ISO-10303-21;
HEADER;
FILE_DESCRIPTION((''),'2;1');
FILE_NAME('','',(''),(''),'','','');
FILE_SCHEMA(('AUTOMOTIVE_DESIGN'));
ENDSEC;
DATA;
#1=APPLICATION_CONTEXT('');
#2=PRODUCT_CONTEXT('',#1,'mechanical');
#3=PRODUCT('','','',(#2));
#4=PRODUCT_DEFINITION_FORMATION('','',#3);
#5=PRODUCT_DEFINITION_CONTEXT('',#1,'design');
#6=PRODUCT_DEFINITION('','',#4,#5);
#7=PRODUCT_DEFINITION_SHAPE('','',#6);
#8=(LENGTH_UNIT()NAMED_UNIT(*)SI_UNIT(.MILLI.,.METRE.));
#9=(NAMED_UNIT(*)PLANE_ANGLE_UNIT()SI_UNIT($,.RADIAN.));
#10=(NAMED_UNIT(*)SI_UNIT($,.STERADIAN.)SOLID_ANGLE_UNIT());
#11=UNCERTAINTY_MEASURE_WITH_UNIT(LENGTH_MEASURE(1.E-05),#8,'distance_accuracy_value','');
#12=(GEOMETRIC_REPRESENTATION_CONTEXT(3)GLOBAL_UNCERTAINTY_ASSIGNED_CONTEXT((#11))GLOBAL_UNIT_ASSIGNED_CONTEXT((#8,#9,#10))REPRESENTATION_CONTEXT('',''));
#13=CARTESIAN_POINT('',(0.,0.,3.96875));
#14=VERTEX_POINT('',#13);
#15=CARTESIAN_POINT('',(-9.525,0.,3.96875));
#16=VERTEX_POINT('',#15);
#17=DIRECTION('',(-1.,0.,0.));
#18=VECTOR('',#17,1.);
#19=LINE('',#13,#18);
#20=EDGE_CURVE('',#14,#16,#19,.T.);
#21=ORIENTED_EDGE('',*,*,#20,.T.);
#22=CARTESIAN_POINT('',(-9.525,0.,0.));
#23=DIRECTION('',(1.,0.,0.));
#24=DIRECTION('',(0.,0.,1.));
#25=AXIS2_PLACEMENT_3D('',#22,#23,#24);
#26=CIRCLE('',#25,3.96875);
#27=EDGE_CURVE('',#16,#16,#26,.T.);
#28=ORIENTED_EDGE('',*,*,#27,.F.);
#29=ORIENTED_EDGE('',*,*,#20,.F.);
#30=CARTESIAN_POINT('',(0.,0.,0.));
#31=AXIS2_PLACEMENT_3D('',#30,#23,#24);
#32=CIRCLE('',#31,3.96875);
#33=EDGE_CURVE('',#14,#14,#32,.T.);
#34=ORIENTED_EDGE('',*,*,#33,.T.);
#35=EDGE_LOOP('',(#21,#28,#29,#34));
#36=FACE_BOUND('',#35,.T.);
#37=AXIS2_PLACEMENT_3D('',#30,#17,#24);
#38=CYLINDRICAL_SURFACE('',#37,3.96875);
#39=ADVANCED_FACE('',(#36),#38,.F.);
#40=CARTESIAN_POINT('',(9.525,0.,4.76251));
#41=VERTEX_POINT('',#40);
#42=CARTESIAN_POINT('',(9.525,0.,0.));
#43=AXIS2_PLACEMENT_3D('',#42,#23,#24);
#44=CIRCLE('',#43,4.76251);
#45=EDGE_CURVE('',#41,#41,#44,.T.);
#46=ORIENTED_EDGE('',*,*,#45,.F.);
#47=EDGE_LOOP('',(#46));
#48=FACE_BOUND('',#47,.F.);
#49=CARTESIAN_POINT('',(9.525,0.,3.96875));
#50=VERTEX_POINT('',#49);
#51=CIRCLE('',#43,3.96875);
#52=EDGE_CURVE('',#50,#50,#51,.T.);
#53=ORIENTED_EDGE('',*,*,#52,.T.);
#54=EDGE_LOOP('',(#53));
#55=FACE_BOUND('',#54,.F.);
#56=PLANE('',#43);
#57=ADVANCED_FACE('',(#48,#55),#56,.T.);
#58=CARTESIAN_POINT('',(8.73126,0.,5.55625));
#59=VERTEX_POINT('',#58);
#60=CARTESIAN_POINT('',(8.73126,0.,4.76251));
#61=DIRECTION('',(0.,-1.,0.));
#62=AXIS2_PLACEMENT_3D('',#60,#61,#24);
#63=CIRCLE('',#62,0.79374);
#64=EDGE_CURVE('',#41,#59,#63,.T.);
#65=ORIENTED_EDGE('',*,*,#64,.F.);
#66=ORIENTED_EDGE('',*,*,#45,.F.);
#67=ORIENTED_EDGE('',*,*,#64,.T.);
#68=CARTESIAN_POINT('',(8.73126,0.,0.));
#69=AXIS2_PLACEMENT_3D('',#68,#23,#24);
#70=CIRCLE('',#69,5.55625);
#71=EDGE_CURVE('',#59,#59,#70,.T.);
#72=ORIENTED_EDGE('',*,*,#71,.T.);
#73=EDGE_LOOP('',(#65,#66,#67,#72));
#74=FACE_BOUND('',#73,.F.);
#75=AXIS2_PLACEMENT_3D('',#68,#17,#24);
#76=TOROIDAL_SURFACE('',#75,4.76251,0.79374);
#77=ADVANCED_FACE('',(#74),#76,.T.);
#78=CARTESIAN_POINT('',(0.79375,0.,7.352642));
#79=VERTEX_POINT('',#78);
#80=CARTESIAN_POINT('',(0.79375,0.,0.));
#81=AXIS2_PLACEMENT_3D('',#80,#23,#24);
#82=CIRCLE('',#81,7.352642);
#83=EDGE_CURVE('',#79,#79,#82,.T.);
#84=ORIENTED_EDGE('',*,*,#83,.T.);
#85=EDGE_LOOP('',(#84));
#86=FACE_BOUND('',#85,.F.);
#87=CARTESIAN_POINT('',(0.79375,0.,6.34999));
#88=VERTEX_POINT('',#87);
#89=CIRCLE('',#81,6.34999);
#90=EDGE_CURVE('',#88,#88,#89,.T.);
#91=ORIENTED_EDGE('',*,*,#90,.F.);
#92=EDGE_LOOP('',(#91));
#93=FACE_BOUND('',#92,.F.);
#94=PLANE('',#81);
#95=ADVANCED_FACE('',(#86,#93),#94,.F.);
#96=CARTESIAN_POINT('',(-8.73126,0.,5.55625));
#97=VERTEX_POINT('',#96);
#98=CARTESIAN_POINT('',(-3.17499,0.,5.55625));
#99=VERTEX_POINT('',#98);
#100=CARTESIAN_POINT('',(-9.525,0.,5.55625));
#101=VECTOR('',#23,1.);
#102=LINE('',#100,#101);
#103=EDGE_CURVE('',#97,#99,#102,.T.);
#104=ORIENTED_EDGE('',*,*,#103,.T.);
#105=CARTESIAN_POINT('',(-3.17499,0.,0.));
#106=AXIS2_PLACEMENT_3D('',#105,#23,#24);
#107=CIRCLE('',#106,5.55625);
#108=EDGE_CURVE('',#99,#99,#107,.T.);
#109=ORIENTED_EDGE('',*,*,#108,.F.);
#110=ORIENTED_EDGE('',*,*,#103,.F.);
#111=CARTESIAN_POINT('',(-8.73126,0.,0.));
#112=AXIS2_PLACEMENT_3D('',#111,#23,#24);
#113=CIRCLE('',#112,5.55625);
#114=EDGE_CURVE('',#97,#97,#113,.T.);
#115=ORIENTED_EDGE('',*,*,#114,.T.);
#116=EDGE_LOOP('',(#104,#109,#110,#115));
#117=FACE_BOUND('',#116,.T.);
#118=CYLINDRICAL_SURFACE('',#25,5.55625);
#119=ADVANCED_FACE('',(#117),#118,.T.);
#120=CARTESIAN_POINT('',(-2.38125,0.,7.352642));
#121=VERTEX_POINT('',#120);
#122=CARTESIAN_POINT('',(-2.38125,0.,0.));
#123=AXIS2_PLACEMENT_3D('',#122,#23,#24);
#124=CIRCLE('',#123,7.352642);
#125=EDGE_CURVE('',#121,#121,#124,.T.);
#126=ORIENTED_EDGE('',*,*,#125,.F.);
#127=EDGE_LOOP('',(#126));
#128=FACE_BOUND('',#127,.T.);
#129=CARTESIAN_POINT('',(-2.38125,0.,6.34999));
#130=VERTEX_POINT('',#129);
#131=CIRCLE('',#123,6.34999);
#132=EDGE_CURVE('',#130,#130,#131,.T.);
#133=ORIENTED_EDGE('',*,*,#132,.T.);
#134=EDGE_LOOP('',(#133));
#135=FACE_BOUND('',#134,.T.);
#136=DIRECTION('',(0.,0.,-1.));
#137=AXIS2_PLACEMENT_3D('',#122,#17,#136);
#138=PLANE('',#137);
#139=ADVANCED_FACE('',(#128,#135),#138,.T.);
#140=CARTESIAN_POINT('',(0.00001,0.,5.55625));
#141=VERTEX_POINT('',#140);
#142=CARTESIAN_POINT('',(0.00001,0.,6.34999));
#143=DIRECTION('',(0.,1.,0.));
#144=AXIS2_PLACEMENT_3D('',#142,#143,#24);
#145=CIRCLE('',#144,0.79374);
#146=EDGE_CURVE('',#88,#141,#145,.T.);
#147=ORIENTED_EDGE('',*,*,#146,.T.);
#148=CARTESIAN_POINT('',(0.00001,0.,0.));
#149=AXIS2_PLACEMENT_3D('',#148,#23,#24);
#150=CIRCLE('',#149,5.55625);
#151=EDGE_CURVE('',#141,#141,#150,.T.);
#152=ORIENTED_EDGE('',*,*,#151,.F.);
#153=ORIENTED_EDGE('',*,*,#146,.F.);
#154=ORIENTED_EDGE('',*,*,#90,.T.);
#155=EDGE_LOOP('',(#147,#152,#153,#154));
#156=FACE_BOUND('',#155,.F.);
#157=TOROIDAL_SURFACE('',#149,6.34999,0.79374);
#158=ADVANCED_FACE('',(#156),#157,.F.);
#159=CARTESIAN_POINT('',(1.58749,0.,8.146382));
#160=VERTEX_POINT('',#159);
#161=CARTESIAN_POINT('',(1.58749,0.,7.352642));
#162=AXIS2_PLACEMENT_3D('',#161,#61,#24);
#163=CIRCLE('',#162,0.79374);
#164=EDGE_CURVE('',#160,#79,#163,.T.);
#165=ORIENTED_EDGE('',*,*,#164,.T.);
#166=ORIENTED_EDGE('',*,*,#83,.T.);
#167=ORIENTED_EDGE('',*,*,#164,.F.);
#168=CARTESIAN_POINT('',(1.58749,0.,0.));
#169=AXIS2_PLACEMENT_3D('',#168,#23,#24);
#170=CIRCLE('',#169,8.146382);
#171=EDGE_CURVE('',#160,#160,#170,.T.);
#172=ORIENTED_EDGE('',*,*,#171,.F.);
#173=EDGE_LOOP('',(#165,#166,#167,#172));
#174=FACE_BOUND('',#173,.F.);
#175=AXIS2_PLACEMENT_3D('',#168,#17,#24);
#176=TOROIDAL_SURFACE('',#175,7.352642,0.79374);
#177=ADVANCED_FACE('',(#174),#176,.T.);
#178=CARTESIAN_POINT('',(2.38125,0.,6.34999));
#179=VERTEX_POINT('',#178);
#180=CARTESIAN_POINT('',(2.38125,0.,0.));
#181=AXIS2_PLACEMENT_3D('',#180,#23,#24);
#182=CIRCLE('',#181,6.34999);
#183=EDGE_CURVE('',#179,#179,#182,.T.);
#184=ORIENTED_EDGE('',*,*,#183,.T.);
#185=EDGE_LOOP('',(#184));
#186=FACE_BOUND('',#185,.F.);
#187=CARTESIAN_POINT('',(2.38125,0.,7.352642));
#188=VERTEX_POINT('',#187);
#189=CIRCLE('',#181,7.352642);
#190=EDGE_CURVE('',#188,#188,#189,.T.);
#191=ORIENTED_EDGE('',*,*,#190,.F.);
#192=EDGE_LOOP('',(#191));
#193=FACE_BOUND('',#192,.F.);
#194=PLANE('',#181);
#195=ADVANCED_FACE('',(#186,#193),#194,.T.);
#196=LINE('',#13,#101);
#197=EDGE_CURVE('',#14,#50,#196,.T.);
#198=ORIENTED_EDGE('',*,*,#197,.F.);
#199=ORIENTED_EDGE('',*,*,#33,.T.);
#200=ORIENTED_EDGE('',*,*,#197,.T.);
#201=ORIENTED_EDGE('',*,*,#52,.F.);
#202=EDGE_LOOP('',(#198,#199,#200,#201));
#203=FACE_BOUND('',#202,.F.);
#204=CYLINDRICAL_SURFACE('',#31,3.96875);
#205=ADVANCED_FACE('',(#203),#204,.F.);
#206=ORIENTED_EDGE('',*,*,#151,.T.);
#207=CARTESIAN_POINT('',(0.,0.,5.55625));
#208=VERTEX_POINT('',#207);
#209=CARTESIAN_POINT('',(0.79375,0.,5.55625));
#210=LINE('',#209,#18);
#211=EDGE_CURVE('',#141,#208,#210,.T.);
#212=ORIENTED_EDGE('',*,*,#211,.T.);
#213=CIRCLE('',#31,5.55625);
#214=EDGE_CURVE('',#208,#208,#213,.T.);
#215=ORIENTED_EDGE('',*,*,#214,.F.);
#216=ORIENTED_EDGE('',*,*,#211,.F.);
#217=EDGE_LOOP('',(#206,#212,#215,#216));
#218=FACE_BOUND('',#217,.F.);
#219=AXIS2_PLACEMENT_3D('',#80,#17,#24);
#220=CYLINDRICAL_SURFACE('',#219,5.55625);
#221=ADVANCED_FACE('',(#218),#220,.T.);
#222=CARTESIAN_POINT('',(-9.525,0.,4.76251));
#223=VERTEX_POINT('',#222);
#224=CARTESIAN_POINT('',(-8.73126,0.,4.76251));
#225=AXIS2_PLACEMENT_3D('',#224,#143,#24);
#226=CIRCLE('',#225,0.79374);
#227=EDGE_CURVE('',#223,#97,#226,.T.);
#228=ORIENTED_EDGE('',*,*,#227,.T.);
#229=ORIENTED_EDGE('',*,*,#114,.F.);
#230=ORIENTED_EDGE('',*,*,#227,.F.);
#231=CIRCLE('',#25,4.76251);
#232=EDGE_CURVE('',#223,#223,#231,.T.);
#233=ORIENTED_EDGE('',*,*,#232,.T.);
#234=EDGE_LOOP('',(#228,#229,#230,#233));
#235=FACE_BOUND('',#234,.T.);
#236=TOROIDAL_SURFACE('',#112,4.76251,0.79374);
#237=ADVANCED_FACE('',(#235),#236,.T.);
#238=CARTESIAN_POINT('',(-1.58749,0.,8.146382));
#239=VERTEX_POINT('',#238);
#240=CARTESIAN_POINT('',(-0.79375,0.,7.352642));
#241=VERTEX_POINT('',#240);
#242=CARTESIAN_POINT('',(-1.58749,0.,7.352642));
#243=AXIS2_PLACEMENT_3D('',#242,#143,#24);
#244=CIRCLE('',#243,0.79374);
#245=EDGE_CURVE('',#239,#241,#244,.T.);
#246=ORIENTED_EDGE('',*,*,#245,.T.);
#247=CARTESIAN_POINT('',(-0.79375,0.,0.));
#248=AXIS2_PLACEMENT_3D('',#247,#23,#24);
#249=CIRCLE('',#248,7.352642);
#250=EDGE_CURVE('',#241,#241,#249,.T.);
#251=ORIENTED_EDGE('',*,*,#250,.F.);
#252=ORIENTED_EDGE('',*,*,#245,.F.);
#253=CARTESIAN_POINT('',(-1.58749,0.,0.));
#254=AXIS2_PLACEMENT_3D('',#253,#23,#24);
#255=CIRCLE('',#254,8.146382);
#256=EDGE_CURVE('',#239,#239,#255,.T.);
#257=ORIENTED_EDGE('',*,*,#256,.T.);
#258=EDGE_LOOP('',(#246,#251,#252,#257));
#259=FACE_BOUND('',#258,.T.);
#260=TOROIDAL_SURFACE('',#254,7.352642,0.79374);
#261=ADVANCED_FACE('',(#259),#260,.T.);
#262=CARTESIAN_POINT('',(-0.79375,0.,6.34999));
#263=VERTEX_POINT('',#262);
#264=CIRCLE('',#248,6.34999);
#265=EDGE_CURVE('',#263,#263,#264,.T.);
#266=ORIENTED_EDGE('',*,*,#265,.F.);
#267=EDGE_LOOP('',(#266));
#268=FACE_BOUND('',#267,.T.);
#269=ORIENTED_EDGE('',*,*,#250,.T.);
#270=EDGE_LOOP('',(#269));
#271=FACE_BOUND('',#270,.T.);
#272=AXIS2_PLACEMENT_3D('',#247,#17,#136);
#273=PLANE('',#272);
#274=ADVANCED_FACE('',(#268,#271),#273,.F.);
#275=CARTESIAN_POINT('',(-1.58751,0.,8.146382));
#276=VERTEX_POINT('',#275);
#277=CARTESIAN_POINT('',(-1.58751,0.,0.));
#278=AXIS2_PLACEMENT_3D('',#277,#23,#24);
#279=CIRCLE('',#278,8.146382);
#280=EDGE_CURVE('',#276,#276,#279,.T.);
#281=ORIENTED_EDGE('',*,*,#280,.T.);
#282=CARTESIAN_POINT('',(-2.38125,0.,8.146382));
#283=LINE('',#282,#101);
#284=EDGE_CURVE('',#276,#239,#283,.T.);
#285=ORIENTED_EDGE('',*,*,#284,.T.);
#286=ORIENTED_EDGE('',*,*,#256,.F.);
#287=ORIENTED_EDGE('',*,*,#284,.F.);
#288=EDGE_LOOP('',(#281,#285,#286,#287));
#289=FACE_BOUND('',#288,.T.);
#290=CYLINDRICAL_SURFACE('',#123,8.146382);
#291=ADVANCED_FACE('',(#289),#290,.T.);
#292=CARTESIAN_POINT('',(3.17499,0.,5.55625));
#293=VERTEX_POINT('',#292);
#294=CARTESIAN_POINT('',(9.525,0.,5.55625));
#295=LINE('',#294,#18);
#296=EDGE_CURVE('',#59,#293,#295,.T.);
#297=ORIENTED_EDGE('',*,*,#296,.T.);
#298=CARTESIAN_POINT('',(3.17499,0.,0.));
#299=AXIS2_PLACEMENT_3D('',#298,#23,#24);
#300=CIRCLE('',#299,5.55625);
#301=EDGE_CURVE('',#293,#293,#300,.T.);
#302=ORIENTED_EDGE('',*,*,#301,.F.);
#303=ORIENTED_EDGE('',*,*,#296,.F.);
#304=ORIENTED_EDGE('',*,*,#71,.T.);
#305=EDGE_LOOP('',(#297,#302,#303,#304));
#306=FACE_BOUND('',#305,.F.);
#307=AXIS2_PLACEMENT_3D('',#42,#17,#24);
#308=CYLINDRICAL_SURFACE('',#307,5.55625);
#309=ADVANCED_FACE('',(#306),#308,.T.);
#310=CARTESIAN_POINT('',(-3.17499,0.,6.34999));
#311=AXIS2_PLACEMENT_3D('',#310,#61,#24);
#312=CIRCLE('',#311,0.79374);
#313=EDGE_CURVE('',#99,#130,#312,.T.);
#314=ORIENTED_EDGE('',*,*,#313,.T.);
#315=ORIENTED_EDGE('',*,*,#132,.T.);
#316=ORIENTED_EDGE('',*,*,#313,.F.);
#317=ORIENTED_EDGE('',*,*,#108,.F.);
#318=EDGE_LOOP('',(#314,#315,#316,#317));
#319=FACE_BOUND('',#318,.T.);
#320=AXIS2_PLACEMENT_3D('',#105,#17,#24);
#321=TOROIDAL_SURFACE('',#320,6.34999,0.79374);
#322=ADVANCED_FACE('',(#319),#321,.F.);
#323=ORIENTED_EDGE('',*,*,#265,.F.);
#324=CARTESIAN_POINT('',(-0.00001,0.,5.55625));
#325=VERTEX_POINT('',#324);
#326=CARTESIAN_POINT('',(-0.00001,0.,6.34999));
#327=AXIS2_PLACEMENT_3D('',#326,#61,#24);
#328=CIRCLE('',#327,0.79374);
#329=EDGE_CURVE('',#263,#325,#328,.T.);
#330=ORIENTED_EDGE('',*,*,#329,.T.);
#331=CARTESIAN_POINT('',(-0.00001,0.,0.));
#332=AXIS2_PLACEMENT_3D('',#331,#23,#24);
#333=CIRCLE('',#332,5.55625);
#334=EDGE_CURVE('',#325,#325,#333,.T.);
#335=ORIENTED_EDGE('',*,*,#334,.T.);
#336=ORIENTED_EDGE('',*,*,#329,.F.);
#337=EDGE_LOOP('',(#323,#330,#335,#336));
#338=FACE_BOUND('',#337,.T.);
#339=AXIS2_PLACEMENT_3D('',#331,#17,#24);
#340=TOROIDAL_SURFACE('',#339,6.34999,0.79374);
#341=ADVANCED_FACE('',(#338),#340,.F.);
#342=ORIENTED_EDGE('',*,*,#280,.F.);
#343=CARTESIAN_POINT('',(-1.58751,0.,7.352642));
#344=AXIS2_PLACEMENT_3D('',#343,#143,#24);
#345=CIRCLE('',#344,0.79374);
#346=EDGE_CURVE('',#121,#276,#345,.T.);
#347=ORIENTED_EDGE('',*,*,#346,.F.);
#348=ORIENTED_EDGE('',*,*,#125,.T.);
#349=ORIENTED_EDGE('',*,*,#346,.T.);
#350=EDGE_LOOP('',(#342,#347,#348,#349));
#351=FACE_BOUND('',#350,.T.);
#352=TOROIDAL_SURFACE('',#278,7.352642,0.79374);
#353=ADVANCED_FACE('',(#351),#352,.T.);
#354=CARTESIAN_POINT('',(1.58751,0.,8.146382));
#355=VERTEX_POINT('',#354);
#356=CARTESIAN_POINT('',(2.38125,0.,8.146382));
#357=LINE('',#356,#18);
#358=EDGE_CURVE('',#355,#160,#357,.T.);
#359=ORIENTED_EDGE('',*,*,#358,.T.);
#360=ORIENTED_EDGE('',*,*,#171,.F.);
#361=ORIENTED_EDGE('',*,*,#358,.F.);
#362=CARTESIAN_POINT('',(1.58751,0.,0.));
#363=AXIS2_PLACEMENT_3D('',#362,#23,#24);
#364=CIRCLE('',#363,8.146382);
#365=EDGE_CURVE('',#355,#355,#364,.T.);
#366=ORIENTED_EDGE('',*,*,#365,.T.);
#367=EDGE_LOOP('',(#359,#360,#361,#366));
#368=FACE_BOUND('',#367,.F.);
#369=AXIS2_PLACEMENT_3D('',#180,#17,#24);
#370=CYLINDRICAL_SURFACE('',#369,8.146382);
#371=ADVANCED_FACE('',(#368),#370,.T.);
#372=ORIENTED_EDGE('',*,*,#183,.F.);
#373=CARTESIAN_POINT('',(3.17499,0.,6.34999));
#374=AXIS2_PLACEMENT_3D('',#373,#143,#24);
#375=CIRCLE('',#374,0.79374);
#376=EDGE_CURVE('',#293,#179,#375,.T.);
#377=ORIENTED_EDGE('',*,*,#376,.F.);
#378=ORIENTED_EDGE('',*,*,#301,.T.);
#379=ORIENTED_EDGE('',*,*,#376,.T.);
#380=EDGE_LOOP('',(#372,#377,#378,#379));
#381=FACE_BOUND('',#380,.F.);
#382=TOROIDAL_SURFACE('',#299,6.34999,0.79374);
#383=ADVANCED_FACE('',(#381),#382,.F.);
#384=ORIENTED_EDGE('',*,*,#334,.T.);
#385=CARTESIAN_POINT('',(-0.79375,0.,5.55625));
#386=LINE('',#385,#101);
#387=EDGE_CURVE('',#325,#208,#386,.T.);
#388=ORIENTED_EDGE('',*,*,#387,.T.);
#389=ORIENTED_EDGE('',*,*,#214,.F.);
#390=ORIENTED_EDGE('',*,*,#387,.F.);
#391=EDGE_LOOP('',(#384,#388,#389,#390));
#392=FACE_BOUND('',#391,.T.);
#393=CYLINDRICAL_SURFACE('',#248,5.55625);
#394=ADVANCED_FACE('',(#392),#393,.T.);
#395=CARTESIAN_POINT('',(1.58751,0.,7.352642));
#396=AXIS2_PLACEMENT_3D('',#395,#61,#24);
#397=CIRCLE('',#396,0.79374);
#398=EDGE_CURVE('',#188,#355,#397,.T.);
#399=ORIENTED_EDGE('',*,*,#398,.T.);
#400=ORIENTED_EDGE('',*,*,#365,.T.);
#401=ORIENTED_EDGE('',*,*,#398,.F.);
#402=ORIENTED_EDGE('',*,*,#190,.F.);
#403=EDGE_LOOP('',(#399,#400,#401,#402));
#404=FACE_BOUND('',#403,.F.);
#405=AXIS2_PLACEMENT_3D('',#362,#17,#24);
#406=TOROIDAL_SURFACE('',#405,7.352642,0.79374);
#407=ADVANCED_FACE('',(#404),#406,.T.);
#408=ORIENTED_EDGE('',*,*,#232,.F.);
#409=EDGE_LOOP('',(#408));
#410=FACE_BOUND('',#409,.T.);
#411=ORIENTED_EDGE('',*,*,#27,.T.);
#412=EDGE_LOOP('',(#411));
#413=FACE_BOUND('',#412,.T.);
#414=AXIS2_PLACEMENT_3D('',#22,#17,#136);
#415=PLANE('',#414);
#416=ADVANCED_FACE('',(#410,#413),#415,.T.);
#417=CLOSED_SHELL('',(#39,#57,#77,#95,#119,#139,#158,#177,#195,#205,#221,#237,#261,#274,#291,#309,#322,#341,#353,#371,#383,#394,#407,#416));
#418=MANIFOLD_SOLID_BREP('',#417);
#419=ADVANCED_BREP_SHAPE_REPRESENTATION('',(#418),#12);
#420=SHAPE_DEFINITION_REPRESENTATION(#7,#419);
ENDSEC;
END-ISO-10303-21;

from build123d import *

# Parameters (mm, degrees)
F4_R = 0.79374


# Not quite as in the source:
# - a fillet or chamfer is up to 0.001 mm smaller than in the source, because OpenCascade refuses the exact size


with BuildPart() as f2:
    # F0 (on Front) → F2 (revolve)
    with BuildSketch(Plane.XZ):
        Polygon((0, 5.55625), (0, 3.96875), (9.525, 3.96875), (9.525, 5.55625), (2.38125, 5.55625), (2.38125, 8.1463824849), (0.79375, 8.1463824849), (0.79375, 5.55625), align=None)
    revolve(axis=Axis((1.0093955789, 0, 0), (1, 0, 0)))

    # F3: F2 across face


with BuildPart() as f2_1:
    add(f2.part)
    add(f2.part.mirror(Plane(origin=(0, 0, 0), x_dir=(0, -1, 0), z_dir=(-1, 0, 0))))

    # F4 (radius 0.79375 in the source; OpenCascade refuses exactly that, so slightly less here)
    f4_edges = [f2_1.edges().sort_by_distance(p)[0] for p in [
        (-0.79375, 0, -8.146382),
        (-2.38125, 0, -8.146382),
        (-9.525, 0, -5.55625),
        (-2.38125, 0, -5.55625),
        (-0.79375, 0, -5.55625),
        (2.38125, 0, -8.146382),
        (0.79375, 0, -8.146382),
        (0.79375, 0, -5.55625),
        (2.38125, 0, -5.55625),
        (9.525, 0, -5.55625),
    ]]
    fillet(f4_edges, radius=F4_R)


solid = f2_1.part
